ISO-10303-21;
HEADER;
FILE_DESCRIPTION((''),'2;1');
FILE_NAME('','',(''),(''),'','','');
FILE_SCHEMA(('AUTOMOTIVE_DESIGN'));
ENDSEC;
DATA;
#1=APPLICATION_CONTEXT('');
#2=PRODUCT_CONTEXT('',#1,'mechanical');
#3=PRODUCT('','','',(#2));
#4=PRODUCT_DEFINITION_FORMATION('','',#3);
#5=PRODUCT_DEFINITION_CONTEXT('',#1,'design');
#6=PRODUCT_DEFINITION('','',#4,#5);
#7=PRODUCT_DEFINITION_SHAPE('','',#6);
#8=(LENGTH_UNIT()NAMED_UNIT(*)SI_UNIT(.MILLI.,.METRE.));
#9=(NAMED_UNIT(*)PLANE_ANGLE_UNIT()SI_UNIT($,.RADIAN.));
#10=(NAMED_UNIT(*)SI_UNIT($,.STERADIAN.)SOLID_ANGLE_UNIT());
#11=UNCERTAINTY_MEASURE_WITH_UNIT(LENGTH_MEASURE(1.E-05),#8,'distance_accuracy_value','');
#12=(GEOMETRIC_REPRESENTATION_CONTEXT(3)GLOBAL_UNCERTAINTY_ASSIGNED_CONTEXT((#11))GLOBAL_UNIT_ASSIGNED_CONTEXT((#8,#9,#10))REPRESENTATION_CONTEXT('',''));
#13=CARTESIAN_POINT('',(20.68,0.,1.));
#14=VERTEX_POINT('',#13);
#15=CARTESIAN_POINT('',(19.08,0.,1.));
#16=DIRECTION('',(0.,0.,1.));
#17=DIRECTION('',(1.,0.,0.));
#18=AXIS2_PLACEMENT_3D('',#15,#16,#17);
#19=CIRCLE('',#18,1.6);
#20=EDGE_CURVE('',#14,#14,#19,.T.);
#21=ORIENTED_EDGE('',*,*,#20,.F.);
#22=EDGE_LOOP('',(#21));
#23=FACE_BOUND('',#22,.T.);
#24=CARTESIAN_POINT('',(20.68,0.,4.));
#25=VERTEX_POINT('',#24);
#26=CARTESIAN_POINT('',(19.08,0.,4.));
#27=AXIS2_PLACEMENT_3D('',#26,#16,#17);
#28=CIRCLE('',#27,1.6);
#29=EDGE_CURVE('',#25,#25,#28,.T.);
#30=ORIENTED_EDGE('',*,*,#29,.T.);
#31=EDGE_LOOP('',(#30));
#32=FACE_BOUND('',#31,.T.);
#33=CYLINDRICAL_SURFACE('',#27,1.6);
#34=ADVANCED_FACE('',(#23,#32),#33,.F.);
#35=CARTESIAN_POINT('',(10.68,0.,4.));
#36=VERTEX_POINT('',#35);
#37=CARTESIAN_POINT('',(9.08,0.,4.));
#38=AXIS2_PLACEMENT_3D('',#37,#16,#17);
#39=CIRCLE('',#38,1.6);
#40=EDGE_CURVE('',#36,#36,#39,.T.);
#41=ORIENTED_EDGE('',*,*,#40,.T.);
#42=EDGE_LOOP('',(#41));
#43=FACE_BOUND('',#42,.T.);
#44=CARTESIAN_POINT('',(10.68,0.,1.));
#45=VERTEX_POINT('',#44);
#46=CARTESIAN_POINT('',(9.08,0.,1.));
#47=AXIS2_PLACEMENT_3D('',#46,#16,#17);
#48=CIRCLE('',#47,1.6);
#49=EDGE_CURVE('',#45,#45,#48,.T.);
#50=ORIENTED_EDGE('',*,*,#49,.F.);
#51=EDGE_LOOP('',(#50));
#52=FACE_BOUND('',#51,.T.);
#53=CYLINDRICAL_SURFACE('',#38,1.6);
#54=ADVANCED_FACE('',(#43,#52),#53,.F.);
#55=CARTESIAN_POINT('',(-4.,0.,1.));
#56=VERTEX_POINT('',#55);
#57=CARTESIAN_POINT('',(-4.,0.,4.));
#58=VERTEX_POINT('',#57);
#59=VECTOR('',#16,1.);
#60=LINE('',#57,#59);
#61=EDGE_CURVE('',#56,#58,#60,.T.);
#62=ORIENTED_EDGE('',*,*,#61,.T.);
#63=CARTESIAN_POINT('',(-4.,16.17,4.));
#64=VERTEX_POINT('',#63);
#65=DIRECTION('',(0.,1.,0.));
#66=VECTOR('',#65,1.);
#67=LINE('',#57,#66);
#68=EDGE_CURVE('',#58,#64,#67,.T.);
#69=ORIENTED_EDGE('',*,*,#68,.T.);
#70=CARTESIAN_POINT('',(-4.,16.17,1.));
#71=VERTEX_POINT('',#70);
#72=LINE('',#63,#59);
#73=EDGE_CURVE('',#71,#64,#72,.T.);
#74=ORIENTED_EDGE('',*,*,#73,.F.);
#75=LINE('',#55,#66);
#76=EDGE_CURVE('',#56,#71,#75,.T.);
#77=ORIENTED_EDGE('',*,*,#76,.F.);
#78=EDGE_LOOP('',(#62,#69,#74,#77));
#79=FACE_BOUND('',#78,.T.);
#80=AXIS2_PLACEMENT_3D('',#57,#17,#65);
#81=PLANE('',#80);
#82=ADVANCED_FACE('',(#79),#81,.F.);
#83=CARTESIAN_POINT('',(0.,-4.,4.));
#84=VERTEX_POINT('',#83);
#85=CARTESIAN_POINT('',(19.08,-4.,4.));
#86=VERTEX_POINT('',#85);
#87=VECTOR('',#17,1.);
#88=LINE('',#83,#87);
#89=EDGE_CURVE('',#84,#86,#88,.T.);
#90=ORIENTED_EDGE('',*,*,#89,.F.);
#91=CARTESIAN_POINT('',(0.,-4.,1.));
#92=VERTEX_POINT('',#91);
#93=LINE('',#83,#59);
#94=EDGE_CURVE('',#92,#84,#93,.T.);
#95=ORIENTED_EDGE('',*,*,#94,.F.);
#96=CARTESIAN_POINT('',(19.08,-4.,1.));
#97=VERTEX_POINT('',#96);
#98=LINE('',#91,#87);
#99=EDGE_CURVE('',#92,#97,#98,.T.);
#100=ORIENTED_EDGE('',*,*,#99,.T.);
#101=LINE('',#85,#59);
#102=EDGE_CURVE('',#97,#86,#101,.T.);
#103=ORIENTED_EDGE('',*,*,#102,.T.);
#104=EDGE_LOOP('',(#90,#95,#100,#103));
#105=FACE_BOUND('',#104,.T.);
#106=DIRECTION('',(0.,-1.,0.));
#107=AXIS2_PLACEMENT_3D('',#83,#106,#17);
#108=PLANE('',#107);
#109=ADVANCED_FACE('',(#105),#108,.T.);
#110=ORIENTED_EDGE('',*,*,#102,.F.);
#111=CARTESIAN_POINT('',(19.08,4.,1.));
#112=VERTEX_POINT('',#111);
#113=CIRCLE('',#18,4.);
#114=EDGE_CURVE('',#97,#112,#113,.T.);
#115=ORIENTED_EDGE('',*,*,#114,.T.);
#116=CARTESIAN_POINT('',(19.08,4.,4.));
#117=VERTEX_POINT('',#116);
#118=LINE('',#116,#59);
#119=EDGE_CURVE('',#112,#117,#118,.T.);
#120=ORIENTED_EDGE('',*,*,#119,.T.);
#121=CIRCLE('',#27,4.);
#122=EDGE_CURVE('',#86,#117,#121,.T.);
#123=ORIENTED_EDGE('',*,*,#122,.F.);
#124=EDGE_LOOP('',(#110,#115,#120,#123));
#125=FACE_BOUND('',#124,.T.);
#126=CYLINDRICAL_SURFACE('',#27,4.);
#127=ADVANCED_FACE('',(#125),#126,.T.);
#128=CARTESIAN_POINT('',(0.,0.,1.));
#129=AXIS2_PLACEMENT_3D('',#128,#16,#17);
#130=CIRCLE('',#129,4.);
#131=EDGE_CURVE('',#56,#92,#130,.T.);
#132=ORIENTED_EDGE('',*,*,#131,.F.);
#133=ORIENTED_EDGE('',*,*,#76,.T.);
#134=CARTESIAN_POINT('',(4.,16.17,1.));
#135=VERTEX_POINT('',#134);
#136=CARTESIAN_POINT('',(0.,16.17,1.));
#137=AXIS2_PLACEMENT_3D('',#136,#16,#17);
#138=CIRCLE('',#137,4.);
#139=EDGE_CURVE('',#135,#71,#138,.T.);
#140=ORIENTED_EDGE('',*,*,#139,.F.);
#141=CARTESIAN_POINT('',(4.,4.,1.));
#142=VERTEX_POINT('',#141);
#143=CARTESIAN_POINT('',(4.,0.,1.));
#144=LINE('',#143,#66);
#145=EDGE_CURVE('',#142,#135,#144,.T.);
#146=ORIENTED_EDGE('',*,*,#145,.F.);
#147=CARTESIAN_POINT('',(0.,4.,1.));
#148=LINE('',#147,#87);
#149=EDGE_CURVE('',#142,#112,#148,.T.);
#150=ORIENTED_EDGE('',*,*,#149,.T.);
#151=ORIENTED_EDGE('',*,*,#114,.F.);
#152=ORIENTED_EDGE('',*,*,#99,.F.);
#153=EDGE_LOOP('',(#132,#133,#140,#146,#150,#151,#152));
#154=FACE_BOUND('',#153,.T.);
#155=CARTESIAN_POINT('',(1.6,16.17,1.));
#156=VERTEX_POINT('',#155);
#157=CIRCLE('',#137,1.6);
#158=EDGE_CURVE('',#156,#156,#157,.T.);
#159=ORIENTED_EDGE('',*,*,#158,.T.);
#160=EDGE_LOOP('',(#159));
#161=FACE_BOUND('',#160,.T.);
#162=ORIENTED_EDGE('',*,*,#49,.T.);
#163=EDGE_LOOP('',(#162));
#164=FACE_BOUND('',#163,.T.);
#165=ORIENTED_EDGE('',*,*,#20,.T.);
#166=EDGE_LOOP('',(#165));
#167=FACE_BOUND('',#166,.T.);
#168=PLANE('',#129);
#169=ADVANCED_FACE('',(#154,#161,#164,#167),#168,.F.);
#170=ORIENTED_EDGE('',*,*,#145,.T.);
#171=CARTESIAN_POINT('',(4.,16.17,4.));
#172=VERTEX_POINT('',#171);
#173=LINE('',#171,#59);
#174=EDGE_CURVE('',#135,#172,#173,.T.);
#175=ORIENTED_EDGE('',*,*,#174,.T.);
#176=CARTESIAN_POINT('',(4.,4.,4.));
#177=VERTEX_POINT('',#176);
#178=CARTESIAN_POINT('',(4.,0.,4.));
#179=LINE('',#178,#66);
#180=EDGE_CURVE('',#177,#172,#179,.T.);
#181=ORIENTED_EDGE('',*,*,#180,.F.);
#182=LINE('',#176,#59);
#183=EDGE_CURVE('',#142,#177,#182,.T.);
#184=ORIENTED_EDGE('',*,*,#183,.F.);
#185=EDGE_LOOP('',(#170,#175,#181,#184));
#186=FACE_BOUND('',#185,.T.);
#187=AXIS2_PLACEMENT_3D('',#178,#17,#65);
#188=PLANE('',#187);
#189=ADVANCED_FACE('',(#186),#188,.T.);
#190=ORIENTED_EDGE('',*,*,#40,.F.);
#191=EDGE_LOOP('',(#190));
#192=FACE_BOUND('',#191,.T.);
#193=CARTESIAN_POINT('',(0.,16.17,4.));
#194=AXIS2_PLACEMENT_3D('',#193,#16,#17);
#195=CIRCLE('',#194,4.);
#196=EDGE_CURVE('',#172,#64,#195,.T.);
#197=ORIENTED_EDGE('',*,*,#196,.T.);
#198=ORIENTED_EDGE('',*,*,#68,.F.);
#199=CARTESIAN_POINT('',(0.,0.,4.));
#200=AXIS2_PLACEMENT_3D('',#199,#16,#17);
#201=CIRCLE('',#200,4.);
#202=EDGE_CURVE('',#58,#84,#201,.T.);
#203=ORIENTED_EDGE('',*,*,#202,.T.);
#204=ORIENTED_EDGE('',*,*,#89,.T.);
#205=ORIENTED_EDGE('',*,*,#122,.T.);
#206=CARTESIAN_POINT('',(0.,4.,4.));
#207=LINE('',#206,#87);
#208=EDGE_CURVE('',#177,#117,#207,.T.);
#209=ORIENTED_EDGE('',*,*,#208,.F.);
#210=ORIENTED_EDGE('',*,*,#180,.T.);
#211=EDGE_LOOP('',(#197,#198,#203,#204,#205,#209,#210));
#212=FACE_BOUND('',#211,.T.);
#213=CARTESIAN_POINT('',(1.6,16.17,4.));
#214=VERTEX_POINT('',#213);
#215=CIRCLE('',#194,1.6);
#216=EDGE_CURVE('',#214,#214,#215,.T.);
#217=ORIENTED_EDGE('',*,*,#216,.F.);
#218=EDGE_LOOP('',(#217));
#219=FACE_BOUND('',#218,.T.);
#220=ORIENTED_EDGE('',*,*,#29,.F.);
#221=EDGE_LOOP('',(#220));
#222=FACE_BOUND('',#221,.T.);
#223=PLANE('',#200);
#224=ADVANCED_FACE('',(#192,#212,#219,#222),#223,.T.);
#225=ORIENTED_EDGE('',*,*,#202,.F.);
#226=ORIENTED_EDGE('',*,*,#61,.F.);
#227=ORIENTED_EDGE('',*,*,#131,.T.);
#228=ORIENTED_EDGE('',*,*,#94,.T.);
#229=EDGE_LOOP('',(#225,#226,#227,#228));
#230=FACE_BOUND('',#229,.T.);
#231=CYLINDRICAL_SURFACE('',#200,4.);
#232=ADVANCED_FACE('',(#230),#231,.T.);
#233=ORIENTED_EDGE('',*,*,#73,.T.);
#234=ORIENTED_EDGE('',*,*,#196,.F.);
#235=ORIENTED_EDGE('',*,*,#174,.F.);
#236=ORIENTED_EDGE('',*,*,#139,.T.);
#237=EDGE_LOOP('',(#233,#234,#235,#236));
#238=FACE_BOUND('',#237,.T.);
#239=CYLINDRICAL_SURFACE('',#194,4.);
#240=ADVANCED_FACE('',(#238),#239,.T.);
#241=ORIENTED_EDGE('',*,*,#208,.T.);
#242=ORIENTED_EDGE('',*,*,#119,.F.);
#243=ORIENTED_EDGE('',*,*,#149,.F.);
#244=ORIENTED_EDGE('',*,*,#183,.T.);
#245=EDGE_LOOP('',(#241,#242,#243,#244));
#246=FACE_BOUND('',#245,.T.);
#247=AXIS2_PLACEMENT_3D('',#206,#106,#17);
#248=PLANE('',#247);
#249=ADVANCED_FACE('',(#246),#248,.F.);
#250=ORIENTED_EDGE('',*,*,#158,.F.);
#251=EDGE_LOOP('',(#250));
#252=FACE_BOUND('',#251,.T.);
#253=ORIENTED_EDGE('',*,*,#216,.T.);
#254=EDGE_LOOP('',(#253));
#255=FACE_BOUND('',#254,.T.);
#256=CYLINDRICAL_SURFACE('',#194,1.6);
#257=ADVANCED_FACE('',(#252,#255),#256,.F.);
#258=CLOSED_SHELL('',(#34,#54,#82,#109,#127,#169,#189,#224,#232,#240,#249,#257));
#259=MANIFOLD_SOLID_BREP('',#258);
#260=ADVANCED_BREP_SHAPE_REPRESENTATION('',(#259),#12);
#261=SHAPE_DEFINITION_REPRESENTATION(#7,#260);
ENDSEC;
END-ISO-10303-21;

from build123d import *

# Parameters (mm, degrees)
SKETCH_1_R              = 1.6
EXTRUDE_1_DEPTH         = 4
SHEET_METAL_1_OUTLINE_R = 1.6
SHEET_METAL_1_DEPTH     = 1


# Read off the part's stored shape, not the designer's step: 轉換-實體1
with BuildPart() as part:
    # Sketch 1 → 填料-伸長1 (new body)
    # profile 1 of 3: a face of its own
    with BuildSketch(Plane.XY):
        with BuildLine():
            ThreePointArc((-4, 0), (-2.828427125, 2.828427125), (0, 4))
            Line((0, 4), (4, 4))
            Line((4, 4), (4, 16.17))
            ThreePointArc((4, 16.17), (0, 20.17), (-4, 16.17))
            Line((-4, 16.17), (-4, 0))
        make_face()
        with Locations((0, 16.17)):
            Circle(SKETCH_1_R, mode=Mode.SUBTRACT)
    # profile 2 of 3: a face of its own
    with BuildSketch(Plane.XY):
        with BuildLine():
            Line((4, 4), (0, 4))
            ThreePointArc((0, 4), (-2.828427125, 2.828427125), (-4, 0))
            ThreePointArc((-4, 0), (-2.828427125, -2.828427125), (0, -4))
            ThreePointArc((0, -4), (2.828427125, -2.828427125), (4, 0))
            Line((4, 0), (4, 4))
        make_face()
    # profile 3 of 3: a face of its own
    with BuildSketch(Plane.XY):
        with BuildLine():
            Line((19.08, 4), (4, 4))
            Line((4, 4), (4, 0))
            ThreePointArc((4, 0), (2.828427125, -2.828427125), (0, -4))
            Line((0, -4), (19.08, -4))
            ThreePointArc((19.08, -4), (23.08, 0), (19.08, 4))
        make_face()
        with Locations((9.08, 0)):
            Circle(SKETCH_1_R, mode=Mode.SUBTRACT)
        with Locations((19.08, 0)):
            Circle(SKETCH_1_R, mode=Mode.SUBTRACT)
    extrude(amount=EXTRUDE_1_DEPTH)

    # Sheet Metal 1 outline → Sheet Metal 1 (cut)
    with BuildSketch(Plane.XY):
        with BuildLine():
            ThreePointArc((4, 16.17), (0, 20.17), (-4, 16.17))
            Line((-4, 16.17), (-4, 0))
            ThreePointArc((-4, 0), (-2.828427125, -2.828427125), (0, -4))
            Line((0, -4), (19.08, -4))
            ThreePointArc((19.08, -4), (23.08, 0), (19.08, 4))
            Line((19.08, 4), (4, 4))
            Line((4, 4), (4, 16.17))
        make_face()
        with Locations((9.08, 0)):
            Circle(SHEET_METAL_1_OUTLINE_R, mode=Mode.SUBTRACT)
        with Locations((19.08, 0)):
            Circle(SHEET_METAL_1_OUTLINE_R, mode=Mode.SUBTRACT)
        with Locations((0, 16.17)):
            Circle(SHEET_METAL_1_OUTLINE_R, mode=Mode.SUBTRACT)
    extrude(amount=SHEET_METAL_1_DEPTH, mode=Mode.SUBTRACT)


solid = part.part
